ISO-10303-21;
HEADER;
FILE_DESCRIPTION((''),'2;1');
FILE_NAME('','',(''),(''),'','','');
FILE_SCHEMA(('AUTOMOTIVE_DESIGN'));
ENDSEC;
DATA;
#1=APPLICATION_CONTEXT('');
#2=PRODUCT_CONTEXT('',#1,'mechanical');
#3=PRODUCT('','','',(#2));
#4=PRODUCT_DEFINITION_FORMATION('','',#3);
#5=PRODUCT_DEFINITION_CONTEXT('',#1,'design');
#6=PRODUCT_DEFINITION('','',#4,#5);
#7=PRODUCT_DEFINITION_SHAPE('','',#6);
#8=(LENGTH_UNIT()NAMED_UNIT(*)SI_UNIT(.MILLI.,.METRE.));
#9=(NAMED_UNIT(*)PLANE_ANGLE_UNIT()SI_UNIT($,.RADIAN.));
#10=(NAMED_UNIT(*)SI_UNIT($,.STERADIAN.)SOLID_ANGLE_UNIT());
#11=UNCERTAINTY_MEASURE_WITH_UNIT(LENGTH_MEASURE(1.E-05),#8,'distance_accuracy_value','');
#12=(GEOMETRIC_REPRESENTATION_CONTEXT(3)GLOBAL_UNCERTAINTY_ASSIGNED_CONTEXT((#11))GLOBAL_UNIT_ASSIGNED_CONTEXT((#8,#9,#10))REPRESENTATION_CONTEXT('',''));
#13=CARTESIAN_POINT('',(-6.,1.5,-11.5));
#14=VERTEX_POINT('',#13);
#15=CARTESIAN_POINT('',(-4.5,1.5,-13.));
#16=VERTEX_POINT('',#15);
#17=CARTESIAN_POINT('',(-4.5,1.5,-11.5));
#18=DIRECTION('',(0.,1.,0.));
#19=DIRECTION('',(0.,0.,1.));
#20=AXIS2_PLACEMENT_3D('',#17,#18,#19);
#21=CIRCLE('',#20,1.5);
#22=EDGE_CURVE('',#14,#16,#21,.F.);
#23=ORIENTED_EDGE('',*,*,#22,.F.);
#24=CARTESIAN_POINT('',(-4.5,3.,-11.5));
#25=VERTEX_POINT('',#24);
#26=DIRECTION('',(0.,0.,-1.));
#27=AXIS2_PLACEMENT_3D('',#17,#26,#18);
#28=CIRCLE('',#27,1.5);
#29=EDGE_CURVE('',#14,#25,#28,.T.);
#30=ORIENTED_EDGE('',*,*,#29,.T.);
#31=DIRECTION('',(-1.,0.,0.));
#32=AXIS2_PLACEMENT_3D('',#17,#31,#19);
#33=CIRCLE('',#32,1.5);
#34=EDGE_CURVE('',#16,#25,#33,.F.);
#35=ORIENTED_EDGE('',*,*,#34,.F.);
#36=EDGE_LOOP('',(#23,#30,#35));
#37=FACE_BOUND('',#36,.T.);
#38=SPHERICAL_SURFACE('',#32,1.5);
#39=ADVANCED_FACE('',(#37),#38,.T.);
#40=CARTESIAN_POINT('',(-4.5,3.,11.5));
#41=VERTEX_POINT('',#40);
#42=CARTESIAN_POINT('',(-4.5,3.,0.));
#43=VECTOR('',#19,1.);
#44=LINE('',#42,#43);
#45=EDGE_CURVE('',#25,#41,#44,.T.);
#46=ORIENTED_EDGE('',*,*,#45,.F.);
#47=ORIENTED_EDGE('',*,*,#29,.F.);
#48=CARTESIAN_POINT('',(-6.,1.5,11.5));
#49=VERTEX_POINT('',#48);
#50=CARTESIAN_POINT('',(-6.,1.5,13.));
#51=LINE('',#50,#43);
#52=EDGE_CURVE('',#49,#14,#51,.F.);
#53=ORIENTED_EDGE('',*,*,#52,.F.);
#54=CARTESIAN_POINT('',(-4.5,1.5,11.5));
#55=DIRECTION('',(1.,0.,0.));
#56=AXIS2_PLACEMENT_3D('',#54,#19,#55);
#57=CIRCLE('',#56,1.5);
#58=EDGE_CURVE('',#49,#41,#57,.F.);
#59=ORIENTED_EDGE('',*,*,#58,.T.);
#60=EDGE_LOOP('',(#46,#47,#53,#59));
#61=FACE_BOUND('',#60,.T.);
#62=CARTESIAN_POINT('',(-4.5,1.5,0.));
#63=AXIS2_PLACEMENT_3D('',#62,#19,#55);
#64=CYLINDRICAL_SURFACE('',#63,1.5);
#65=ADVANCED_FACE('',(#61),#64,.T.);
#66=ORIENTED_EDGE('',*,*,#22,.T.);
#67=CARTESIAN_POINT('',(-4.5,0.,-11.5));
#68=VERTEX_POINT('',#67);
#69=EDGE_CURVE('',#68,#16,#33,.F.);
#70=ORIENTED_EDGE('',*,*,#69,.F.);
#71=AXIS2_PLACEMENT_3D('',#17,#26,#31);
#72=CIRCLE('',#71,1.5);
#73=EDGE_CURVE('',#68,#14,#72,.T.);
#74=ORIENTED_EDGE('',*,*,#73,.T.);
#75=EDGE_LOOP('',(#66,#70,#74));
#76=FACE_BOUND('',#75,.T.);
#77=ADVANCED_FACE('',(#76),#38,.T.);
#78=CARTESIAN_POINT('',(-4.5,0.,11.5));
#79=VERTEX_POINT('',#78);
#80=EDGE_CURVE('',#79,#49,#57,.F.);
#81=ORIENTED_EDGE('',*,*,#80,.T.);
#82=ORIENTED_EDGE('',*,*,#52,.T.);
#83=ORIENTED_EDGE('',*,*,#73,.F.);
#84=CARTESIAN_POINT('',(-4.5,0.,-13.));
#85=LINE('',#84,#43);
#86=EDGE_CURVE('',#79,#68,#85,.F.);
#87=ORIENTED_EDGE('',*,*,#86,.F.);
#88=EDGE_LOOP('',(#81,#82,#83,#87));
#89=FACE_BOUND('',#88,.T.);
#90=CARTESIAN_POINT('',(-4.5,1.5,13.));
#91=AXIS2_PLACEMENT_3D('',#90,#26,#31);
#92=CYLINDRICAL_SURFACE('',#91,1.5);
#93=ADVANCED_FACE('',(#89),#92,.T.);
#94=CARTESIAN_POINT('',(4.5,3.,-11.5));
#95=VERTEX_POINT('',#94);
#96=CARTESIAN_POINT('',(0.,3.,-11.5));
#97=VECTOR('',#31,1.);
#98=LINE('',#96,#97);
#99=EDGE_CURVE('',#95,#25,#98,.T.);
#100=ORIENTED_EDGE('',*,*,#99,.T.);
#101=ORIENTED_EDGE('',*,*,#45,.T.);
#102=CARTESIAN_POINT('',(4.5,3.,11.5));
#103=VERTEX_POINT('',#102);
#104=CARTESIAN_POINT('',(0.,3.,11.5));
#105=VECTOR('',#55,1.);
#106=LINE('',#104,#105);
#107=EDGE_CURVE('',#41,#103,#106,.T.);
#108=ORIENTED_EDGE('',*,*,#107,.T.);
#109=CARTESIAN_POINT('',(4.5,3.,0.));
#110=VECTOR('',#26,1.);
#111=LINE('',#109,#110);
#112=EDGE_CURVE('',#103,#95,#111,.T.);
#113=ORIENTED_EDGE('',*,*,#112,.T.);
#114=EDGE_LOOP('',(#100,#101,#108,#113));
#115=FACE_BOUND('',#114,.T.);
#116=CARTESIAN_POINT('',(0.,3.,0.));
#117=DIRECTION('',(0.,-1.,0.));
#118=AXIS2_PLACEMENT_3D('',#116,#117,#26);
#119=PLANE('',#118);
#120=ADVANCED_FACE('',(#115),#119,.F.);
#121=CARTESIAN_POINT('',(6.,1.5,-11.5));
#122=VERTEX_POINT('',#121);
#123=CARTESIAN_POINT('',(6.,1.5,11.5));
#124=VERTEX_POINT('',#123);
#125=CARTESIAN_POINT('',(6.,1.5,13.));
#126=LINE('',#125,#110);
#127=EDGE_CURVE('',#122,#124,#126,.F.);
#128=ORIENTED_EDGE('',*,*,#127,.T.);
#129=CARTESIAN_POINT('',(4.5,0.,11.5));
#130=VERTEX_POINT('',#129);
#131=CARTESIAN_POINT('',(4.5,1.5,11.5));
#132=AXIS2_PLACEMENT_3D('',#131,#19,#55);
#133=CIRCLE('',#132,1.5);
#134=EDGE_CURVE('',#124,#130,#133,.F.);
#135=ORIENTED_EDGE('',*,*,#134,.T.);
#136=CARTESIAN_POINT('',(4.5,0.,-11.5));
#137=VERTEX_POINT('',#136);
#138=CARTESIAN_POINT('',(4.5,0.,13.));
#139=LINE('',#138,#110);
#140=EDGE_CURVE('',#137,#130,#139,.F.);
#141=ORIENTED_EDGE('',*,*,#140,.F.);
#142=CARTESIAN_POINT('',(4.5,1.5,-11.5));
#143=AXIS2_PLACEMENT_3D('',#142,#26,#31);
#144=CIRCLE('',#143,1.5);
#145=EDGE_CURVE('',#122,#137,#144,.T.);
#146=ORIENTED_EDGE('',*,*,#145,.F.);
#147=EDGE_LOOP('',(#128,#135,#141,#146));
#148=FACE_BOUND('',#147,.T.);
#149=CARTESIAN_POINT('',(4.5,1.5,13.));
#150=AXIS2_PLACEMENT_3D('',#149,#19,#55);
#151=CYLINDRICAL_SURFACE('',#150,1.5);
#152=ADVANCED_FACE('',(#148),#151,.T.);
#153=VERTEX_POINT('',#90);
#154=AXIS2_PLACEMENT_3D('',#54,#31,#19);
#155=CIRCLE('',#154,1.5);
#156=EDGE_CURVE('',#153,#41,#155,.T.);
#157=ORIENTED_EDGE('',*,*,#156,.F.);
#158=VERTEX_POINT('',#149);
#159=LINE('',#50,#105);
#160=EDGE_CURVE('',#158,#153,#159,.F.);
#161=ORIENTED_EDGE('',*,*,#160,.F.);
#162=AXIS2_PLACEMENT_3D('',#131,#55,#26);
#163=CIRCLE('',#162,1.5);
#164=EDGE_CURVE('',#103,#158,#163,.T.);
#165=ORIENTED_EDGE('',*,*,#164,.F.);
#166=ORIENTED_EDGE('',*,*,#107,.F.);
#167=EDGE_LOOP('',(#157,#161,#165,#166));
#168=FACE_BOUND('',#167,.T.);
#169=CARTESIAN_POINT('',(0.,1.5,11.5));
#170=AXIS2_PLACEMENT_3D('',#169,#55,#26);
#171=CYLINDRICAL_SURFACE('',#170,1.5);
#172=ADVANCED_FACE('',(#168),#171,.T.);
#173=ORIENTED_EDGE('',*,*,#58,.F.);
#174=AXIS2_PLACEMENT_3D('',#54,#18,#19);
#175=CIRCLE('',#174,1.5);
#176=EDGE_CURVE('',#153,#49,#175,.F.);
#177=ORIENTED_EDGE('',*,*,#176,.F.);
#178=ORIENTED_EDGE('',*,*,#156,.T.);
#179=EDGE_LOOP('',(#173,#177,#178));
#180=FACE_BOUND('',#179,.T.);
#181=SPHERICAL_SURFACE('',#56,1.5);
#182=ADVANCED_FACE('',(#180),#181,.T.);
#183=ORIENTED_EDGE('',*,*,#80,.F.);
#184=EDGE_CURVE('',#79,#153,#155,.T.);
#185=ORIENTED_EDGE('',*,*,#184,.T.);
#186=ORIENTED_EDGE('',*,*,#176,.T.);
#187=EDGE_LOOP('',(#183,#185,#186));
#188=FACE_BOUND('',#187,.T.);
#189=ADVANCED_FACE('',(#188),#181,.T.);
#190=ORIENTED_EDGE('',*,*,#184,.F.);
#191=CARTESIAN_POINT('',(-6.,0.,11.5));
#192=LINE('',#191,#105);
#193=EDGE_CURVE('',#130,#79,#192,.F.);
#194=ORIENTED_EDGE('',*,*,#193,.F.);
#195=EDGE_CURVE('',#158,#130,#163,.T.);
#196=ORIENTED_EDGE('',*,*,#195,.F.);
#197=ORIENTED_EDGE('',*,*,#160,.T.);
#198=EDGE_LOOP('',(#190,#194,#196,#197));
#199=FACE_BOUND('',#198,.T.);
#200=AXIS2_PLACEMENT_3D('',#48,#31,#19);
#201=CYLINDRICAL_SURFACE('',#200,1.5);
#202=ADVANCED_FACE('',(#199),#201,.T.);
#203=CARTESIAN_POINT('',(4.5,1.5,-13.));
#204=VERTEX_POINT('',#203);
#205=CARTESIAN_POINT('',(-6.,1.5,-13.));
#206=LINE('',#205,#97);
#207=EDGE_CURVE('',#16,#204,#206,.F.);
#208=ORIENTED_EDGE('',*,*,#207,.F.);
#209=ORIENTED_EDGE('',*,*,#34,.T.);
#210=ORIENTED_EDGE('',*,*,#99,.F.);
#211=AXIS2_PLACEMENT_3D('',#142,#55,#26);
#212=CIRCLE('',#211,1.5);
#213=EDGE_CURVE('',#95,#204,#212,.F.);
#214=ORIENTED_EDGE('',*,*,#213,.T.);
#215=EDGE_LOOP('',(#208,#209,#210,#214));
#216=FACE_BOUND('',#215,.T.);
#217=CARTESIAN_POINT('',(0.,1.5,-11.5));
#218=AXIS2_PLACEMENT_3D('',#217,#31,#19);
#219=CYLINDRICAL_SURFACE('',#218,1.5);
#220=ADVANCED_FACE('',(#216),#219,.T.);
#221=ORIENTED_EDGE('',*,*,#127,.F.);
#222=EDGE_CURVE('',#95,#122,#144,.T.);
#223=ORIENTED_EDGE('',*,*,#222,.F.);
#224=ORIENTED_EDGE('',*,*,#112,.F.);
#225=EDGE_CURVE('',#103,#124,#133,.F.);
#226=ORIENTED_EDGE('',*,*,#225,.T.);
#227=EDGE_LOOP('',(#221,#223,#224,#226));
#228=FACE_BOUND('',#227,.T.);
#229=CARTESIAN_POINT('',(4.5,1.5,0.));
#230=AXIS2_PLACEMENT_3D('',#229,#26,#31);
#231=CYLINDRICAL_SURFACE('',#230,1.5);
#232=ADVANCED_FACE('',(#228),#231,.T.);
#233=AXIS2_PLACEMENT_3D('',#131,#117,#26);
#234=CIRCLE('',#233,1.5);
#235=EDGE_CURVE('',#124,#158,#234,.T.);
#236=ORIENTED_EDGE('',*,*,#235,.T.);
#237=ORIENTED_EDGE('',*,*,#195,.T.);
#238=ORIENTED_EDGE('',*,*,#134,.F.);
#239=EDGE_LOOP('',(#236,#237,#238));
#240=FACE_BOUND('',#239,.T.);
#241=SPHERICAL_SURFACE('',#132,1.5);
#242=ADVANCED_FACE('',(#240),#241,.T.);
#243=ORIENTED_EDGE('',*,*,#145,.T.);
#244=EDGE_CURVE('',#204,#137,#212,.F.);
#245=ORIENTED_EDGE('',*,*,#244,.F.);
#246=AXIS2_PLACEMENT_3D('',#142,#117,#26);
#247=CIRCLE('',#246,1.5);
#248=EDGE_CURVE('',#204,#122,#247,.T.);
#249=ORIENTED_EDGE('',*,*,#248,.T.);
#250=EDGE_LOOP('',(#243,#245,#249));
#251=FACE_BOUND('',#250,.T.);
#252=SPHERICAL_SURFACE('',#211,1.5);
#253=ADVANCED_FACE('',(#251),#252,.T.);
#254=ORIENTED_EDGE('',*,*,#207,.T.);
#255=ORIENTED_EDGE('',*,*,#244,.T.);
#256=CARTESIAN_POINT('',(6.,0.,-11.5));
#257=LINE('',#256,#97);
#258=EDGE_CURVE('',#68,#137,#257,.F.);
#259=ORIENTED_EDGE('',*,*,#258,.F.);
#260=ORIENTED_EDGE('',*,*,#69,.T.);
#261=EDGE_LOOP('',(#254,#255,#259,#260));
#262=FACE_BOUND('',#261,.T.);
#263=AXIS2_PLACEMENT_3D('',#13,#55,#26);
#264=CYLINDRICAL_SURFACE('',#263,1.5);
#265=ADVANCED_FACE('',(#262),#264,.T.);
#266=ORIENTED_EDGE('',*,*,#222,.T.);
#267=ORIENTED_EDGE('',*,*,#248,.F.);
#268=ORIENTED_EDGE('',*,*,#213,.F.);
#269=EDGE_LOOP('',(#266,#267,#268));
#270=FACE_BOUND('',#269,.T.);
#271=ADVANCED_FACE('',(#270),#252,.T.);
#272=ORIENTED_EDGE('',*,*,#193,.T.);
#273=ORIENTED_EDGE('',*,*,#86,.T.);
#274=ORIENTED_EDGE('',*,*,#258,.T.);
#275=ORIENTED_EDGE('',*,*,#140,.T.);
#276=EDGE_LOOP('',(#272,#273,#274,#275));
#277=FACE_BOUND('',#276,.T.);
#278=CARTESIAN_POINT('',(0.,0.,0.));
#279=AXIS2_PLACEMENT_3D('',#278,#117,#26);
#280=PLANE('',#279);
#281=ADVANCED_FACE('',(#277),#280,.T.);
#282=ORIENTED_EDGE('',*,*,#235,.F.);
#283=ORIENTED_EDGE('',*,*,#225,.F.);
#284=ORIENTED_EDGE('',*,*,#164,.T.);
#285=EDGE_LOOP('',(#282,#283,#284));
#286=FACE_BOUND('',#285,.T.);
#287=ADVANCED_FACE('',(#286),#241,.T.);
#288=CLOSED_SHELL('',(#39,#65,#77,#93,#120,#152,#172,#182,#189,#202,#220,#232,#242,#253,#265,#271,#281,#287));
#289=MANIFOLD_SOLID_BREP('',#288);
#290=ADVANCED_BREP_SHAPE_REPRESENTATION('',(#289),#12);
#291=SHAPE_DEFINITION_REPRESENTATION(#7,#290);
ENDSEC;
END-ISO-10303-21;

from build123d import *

# Parameters (mm, degrees)
SKETCH1_W           = 12
SKETCH1_H           = 26
BOSS_EXTRUDE1_DEPTH = 3
FILLET1_R           = 1.5


with BuildPart() as part:
    # Sketch1 → Boss-Extrude1 (new body)
    with BuildSketch(Plane(origin=(0, 0, 0), x_dir=(1, 0, 0), z_dir=(0, 1, 0))):
        Rectangle(SKETCH1_W, SKETCH1_H)
    extrude(amount=BOSS_EXTRUDE1_DEPTH)

    # Fillet1
    fillet1_edges = [part.edges().sort_by_distance(p)[0] for p in [
        (-6, 3, 0),
        (0, 3, 13),
        (6, 3, 0),
        (0, 0, 13),
        (-6, 0, 0),
        (0, 0, -13),
        (6, 0, 0),
        (6, 1.5, 13),
        (-6, 1.5, 13),
        (-6, 1.5, -13),
        (6, 1.5, -13),
        (0, 3, -13),
    ]]
    fillet(fillet1_edges, radius=FILLET1_R - 0.0001)  # a hair under: the kernel refuses the full size


solid = part.part
